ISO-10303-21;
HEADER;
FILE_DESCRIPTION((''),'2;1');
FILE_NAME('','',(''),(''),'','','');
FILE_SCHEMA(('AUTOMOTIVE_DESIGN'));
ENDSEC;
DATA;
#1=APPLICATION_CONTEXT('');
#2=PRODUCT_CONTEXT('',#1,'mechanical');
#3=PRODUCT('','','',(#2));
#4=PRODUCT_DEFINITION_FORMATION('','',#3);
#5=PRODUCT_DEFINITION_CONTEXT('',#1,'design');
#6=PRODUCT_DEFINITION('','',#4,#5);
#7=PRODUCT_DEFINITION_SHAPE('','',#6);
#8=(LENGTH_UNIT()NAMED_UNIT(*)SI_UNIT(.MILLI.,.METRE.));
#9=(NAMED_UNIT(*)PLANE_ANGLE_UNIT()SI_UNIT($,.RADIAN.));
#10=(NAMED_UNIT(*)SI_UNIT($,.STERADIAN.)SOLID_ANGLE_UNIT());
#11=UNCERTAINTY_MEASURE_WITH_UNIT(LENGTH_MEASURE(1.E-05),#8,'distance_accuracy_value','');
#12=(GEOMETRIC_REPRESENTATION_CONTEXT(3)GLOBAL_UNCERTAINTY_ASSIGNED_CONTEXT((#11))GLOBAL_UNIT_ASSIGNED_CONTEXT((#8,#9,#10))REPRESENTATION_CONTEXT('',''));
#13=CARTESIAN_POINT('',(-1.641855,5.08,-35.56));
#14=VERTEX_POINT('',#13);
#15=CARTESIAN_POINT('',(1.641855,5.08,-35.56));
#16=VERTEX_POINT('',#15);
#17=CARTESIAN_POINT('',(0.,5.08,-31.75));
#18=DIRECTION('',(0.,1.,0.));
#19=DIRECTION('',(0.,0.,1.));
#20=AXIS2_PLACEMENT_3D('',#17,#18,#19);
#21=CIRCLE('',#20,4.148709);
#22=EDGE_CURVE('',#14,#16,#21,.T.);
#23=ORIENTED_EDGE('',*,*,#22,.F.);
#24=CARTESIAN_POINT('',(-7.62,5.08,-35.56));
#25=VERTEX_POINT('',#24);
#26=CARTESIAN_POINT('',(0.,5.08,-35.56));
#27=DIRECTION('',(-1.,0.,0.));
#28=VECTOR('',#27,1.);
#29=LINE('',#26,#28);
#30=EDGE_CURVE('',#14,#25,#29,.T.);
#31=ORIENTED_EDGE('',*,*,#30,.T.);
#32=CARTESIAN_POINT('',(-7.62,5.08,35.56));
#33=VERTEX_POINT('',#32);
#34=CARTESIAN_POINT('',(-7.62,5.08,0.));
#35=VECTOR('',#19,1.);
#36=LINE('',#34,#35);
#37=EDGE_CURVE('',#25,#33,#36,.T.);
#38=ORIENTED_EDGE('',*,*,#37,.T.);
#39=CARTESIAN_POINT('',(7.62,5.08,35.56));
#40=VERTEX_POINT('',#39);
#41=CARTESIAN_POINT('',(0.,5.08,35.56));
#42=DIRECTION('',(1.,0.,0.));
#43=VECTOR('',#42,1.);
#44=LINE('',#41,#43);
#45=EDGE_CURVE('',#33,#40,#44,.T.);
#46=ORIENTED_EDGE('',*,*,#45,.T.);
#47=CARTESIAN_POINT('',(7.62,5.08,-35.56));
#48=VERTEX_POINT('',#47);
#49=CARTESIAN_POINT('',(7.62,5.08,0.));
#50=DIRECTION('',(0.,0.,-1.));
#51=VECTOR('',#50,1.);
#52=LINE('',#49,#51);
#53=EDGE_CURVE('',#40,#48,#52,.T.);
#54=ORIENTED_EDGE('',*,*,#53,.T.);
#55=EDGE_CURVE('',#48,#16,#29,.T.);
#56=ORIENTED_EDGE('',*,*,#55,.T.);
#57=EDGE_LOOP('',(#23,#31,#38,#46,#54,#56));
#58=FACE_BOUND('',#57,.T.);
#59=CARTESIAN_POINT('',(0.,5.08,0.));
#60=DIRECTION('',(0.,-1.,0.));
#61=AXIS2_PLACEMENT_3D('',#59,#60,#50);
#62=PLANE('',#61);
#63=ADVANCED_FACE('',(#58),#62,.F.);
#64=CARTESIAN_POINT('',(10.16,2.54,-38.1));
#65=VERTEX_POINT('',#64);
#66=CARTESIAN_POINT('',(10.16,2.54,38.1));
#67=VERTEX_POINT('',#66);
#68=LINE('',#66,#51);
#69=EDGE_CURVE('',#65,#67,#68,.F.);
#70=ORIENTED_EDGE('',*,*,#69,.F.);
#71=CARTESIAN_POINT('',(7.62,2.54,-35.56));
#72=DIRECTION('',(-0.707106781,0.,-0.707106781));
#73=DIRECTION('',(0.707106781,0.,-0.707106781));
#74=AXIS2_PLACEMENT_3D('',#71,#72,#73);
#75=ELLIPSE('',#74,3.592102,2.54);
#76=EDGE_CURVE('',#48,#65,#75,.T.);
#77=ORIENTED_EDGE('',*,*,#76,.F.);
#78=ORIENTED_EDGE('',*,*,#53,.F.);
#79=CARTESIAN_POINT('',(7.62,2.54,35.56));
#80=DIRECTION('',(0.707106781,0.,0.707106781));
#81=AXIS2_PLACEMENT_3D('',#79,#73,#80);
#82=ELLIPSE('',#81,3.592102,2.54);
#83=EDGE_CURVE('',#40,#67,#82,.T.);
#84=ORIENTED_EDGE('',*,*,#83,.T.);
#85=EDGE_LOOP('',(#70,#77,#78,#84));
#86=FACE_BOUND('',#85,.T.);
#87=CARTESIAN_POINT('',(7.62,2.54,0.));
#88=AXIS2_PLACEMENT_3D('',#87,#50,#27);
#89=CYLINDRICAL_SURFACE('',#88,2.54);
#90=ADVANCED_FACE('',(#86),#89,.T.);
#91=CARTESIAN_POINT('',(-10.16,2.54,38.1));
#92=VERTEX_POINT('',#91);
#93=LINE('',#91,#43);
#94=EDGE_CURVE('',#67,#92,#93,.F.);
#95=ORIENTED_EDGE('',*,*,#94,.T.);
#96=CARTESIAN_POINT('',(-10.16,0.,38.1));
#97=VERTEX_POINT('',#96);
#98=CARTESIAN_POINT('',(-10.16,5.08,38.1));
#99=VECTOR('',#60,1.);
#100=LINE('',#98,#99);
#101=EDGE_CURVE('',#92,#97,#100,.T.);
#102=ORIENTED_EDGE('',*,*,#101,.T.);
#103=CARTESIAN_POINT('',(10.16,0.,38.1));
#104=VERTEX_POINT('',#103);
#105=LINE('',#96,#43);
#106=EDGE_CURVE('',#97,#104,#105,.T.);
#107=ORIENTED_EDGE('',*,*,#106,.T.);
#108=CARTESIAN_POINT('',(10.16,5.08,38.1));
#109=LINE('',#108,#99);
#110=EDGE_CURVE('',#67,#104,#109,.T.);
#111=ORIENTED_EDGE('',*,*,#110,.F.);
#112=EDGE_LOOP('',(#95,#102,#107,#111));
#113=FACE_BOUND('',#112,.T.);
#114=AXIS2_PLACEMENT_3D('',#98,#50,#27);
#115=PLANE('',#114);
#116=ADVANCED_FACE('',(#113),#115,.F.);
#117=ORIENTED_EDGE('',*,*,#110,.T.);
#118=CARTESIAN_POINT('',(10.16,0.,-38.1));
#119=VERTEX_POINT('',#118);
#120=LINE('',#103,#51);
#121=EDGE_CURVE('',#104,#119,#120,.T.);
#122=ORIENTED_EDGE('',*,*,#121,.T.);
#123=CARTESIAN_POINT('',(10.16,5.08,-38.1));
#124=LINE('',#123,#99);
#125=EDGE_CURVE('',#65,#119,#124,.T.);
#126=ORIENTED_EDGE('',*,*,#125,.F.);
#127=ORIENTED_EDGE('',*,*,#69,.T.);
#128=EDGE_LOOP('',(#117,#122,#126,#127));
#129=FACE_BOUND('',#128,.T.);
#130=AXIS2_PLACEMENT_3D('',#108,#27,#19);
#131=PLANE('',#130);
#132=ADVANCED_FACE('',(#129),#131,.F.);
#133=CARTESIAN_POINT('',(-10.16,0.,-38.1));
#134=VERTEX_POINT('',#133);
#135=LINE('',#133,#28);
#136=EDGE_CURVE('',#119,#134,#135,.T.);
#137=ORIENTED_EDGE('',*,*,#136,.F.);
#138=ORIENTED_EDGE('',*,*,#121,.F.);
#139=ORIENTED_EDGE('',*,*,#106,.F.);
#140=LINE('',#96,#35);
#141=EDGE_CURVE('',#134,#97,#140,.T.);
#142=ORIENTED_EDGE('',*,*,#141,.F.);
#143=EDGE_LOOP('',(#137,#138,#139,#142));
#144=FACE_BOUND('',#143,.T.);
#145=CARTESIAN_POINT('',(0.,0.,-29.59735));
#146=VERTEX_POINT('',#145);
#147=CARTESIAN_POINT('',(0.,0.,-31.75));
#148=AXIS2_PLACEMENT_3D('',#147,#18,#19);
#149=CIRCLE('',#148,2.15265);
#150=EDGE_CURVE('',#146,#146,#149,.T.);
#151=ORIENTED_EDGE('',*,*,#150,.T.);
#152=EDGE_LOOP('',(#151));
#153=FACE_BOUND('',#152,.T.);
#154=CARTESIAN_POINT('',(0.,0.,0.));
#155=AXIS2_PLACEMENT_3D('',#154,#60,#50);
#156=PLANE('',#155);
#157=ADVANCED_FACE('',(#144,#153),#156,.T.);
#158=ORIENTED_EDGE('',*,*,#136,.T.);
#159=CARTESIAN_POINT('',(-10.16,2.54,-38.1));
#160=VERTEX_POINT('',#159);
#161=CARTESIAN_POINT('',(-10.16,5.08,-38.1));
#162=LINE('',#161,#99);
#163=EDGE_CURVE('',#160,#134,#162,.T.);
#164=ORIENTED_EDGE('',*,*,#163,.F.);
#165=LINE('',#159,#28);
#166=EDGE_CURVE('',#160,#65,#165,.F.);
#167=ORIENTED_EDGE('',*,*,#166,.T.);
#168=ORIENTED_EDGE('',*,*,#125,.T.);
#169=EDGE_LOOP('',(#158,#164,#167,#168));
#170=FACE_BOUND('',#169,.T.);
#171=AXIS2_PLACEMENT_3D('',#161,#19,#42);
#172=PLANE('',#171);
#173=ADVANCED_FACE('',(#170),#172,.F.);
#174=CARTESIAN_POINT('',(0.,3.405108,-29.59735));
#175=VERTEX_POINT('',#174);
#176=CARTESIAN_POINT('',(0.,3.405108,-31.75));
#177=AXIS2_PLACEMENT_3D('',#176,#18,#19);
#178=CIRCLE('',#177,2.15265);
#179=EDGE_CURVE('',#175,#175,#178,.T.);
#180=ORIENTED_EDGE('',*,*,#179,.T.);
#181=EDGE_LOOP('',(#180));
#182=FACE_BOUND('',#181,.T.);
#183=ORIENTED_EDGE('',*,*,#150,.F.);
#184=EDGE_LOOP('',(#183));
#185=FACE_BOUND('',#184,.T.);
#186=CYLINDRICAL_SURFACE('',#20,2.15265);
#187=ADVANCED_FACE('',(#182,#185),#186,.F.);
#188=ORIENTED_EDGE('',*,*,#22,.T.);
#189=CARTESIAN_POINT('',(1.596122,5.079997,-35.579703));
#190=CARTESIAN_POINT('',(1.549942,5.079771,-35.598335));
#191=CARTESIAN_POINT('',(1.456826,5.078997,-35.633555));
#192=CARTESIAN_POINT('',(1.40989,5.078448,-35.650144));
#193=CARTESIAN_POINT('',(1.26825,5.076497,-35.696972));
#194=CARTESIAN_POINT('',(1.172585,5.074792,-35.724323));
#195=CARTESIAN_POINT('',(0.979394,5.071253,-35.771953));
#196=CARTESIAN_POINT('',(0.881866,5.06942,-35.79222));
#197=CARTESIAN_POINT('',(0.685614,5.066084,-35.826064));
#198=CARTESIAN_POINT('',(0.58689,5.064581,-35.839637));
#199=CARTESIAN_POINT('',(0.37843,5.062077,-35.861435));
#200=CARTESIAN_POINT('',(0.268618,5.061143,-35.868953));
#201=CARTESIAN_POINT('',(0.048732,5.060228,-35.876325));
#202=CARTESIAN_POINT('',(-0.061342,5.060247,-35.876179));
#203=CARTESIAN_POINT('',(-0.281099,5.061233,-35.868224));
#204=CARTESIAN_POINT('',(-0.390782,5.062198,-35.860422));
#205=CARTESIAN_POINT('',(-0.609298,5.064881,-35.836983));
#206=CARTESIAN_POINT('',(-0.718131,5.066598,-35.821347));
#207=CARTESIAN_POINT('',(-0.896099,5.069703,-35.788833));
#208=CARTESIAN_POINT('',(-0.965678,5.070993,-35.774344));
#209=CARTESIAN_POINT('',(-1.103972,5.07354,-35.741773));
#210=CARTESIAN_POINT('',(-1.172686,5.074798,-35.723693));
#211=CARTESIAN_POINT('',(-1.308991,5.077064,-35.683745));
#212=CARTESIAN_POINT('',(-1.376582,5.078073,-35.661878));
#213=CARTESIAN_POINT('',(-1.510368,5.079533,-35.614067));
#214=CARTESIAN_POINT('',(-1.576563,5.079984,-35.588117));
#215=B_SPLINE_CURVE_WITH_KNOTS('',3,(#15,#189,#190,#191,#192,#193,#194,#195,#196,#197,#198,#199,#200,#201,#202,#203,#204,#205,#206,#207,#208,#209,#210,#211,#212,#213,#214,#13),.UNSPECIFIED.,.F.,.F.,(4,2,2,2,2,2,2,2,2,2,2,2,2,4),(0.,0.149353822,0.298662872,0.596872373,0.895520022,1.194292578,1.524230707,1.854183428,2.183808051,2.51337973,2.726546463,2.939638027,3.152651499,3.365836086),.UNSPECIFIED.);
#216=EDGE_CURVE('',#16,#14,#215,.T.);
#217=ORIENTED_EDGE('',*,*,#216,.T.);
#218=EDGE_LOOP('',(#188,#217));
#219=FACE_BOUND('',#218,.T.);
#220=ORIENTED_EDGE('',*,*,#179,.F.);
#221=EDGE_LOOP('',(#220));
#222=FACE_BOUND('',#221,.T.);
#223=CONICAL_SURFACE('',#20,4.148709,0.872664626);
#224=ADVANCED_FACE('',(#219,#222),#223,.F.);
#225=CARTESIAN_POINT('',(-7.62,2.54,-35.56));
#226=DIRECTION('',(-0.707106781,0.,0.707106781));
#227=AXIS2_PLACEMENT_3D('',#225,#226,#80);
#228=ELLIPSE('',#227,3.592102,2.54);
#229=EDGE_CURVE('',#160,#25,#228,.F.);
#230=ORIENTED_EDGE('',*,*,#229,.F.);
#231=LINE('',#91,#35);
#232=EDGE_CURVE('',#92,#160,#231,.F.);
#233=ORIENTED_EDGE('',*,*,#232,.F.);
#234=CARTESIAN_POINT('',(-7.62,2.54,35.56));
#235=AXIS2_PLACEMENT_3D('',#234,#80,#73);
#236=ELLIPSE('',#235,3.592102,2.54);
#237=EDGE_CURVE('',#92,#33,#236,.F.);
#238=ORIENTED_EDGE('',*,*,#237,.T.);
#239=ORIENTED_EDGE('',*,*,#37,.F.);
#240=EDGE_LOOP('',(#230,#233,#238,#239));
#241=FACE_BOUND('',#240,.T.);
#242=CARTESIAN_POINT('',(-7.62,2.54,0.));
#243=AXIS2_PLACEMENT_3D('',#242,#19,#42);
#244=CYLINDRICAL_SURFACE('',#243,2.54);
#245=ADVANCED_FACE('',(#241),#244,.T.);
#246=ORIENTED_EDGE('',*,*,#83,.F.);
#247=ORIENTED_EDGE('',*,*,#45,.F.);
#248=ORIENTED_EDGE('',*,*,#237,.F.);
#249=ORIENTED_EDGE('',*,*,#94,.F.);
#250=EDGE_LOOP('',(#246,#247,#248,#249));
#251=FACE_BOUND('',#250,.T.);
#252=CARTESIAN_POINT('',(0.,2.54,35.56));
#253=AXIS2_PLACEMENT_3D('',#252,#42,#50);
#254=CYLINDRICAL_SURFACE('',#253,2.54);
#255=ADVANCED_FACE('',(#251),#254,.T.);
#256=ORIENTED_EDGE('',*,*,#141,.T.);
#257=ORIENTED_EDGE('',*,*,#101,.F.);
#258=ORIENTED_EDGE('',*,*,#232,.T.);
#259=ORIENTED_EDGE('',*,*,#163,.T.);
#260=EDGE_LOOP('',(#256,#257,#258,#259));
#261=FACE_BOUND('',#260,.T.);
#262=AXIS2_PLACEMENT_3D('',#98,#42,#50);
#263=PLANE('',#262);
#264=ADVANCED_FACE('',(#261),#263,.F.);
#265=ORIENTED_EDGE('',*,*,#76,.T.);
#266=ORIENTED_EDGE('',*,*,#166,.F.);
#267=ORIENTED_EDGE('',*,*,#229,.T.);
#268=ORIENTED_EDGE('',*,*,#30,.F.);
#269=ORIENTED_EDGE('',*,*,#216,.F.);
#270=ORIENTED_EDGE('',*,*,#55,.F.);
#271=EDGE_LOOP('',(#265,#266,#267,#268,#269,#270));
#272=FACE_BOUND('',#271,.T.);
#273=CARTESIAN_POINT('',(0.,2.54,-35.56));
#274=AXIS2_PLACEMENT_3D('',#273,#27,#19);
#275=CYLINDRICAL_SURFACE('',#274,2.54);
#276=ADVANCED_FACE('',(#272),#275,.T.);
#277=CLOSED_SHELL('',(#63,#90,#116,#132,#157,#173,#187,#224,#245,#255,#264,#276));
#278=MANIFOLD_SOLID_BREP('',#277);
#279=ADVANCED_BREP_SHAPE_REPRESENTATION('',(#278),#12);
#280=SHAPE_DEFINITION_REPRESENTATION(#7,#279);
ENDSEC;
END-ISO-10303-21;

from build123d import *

# Parameters (mm, degrees)
SKETCH1_W                                         = 20.32
SKETCH1_H                                         = 76.2
BOSS_EXTRUDE1_DEPTH                               = 5.08
CSK_FOR_6_FLAT_HEAD_MACHINE_SCREW_100_D           = 4.3053
CSK_FOR_6_FLAT_HEAD_MACHINE_SCREW_100_CSINK_D     = 8.297418
CSK_FOR_6_FLAT_HEAD_MACHINE_SCREW_100_CSINK_ANGLE = 100
FILLET1_R                                         = 2.54


with BuildPart() as part:
    # Sketch1 → Boss-Extrude1 (new body)
    with BuildSketch(Plane(origin=(0, 0, 0), x_dir=(1, 0, 0), z_dir=(0, 1, 0))):
        Rectangle(SKETCH1_W, SKETCH1_H)
    extrude(amount=BOSS_EXTRUDE1_DEPTH)

    # CSK for #6 Flat Head Machine Screw (100)1 (through all)
    with Locations(Plane(origin=(0, 5.08, 0), x_dir=(1, 0, 0), z_dir=(0, 1, 0))):
        with Locations((0, 31.75)):
            CounterSinkHole(CSK_FOR_6_FLAT_HEAD_MACHINE_SCREW_100_D / 2, CSK_FOR_6_FLAT_HEAD_MACHINE_SCREW_100_CSINK_D / 2, counter_sink_angle=CSK_FOR_6_FLAT_HEAD_MACHINE_SCREW_100_CSINK_ANGLE)

    # Fillet1
    # the kernel refuses this fillet: 2.54 mm, written as the material it takes off along each edge
    with BuildSketch(Plane(origin=(-10.16, 5.08, -44.45), x_dir=(1, 0, 0), z_dir=(0, 0, 1)), Plane(origin=(10.16, 5.08, 44.45), x_dir=(-1, 0, 0), z_dir=(0, 0, -1))) as fillet1_piece_1:
        with BuildLine():
            CenterArc((FILLET1_R, -FILLET1_R), FILLET1_R, 90, 90)
            Line((0, -FILLET1_R), (0, 0))
            Line((0, 0), (FILLET1_R, 0))
        make_face()
    extrude(amount=88.9, mode=Mode.SUBTRACT)
    with BuildSketch(Plane(origin=(-16.51, 5.08, 38.1), x_dir=(0, -1, 0), z_dir=(1, 0, 0))) as fillet1_piece_2:
        with BuildLine():
            CenterArc((FILLET1_R, FILLET1_R), FILLET1_R, 180, 90)
            Line((0, FILLET1_R), (0, 0))
            Line((0, 0), (FILLET1_R, 0))
        make_face()
    extrude(amount=33.02, mode=Mode.SUBTRACT)
    with BuildSketch(Plane(origin=(16.51, 5.08, -38.1), x_dir=(0, 0, 1), z_dir=(-1, 0, 0))) as fillet1_piece_3:
        with BuildLine():
            CenterArc((FILLET1_R, -FILLET1_R), FILLET1_R, 90, 90)
            Line((0, -FILLET1_R), (0, 0))
            Line((0, 0), (FILLET1_R, 0))
        make_face()
    extrude(amount=33.02, mode=Mode.SUBTRACT)


solid = part.part
